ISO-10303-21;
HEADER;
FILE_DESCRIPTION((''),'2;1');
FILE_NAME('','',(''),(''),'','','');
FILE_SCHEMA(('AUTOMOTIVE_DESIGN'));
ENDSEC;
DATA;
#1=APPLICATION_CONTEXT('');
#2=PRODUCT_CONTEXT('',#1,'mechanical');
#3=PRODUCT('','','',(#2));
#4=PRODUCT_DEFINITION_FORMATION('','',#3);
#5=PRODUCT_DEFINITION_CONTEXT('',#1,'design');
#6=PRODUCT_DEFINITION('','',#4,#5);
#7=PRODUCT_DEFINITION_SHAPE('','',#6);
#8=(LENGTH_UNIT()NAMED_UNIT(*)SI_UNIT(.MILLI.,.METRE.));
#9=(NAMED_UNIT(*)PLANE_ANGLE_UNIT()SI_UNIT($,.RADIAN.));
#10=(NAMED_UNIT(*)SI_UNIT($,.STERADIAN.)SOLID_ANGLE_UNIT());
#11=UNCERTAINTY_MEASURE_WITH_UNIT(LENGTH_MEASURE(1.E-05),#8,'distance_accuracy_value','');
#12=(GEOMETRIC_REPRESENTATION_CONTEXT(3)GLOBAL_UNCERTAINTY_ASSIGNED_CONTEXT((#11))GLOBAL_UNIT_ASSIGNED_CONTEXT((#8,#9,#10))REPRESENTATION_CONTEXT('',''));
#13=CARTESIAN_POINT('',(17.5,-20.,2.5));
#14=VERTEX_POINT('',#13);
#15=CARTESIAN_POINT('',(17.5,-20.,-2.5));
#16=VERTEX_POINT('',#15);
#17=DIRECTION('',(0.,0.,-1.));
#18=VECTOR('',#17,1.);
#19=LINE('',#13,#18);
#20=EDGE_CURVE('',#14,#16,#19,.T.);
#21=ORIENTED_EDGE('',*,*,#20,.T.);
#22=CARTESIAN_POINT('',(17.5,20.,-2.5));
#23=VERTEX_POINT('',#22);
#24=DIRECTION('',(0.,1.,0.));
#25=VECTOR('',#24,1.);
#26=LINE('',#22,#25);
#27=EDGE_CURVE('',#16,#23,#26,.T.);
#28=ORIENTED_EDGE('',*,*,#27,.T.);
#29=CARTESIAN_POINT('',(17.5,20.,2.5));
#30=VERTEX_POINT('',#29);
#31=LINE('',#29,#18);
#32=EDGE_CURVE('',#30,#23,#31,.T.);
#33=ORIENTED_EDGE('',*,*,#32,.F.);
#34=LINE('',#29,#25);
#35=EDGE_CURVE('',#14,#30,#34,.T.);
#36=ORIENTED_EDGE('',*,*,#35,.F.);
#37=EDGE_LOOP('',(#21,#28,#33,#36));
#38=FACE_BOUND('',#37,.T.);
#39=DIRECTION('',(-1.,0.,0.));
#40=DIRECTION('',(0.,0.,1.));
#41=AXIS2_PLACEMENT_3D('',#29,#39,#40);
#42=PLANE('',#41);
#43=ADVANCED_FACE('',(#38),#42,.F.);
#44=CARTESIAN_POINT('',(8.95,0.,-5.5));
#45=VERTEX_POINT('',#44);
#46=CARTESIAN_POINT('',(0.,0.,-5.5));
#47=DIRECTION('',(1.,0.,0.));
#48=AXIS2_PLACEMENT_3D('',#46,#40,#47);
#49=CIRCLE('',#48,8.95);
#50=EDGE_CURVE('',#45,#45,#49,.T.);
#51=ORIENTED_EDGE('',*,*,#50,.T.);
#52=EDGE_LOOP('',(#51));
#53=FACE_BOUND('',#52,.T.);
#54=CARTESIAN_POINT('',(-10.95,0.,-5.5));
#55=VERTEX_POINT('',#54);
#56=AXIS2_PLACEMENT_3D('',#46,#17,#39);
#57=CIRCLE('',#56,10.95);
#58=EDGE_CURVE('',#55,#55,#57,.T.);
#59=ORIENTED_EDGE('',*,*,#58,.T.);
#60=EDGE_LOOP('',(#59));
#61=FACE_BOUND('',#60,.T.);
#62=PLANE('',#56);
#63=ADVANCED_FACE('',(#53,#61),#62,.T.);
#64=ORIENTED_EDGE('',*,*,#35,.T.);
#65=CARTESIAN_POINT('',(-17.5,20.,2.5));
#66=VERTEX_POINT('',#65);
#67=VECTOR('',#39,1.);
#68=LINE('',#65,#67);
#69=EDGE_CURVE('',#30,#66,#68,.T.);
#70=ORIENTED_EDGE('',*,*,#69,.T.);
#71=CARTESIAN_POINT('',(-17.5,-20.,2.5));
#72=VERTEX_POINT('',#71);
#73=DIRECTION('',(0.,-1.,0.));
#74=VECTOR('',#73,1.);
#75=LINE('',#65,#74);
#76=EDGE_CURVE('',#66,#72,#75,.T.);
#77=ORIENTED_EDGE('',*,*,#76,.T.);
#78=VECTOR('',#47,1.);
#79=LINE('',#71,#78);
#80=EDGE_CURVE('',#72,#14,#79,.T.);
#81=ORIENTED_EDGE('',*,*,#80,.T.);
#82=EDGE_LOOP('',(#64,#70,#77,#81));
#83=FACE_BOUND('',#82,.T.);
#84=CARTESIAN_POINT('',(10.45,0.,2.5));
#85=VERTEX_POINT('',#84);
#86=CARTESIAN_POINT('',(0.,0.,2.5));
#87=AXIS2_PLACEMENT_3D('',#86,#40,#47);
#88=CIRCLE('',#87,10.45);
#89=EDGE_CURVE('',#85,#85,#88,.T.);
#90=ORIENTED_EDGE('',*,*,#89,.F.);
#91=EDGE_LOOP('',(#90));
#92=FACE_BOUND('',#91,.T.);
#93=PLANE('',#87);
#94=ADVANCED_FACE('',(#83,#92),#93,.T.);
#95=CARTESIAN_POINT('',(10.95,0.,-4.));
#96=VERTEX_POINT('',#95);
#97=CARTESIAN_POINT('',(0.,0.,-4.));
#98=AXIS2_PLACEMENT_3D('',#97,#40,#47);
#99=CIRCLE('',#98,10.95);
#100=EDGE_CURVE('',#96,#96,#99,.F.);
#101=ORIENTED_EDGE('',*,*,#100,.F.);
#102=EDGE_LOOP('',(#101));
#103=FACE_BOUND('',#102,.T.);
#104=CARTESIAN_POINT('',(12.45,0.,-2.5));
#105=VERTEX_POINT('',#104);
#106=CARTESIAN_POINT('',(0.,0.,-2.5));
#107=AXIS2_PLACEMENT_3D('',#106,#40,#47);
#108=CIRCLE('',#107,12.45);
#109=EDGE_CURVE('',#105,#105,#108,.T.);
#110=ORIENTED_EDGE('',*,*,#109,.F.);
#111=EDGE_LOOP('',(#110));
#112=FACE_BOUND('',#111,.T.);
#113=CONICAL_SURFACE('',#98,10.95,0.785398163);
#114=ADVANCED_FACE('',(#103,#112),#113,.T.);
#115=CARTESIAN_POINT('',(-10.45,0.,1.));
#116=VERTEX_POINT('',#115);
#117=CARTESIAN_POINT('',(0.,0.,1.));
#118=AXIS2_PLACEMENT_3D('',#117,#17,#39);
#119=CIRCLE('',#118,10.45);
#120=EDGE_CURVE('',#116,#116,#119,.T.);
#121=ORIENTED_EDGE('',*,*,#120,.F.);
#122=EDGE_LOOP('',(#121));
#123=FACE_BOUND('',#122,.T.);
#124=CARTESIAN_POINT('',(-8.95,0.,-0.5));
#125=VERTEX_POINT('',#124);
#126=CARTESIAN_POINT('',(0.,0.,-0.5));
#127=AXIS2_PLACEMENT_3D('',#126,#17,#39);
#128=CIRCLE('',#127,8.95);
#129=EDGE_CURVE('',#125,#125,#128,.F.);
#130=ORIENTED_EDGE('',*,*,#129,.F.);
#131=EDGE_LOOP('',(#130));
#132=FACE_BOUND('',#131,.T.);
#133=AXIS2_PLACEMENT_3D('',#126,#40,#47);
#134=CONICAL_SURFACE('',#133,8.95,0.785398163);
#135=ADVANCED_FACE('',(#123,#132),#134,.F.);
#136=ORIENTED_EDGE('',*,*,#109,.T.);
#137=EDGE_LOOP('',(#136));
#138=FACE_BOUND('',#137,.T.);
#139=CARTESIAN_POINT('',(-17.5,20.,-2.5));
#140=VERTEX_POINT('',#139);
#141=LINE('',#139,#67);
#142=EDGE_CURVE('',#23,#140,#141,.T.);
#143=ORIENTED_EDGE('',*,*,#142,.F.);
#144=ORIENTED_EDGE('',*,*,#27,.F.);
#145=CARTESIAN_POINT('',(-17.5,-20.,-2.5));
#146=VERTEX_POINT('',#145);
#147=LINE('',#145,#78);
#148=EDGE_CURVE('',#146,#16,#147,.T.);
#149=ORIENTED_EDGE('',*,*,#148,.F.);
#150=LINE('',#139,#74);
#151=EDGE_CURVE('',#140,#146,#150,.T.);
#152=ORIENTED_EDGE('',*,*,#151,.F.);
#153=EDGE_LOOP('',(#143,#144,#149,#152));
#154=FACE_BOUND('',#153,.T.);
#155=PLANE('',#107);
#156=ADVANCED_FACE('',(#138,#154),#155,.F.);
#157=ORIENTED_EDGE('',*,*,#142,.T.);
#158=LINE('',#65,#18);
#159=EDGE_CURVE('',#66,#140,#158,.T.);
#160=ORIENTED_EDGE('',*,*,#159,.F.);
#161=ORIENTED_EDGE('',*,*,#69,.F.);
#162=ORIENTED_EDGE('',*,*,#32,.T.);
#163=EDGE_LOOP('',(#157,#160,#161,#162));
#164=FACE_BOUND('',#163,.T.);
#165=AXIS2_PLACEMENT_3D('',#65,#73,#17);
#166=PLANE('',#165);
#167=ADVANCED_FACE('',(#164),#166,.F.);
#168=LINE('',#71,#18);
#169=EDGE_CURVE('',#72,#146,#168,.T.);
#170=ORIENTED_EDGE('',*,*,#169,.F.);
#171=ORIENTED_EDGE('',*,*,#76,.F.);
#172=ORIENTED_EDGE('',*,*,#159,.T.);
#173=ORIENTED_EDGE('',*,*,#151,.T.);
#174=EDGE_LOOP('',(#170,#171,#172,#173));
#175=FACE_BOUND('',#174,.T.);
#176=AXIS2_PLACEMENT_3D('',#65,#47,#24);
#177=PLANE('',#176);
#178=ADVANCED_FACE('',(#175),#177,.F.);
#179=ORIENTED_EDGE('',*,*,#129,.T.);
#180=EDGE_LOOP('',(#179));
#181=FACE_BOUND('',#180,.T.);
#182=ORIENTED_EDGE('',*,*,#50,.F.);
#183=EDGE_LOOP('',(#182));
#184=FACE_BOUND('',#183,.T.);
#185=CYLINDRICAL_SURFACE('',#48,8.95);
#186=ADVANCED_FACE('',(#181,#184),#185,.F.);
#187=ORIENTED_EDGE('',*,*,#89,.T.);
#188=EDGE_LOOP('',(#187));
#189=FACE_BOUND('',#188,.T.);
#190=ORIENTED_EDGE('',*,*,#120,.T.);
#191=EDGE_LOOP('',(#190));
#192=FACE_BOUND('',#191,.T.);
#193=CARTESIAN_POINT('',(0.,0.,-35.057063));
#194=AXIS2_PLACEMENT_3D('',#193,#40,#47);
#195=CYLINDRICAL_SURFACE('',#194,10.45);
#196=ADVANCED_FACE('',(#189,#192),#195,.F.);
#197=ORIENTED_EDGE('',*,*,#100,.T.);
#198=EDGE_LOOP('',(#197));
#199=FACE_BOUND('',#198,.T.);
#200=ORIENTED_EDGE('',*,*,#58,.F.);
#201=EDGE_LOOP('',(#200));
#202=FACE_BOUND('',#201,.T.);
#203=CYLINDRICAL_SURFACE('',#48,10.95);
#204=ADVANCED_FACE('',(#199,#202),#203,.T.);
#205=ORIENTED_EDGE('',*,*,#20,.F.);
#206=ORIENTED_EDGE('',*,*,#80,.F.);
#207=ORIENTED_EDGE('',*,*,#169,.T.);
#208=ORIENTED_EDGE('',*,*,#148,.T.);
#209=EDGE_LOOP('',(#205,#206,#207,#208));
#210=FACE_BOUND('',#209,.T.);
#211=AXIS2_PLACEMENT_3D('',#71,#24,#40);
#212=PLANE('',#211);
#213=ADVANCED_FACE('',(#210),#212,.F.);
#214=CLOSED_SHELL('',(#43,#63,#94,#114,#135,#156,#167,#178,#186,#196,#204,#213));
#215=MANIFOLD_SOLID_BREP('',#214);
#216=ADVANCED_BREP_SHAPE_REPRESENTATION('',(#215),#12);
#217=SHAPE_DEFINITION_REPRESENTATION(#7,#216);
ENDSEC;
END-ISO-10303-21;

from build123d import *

# Parameters (mm, degrees)
SKETCH1_W           = 35
SKETCH1_H           = 40
BOSS_EXTRUDE1_DEPTH = 2.5
SKETCH5_R           = 10.95
BOSS_EXTRUDE2_DEPTH = 3
SKETCH2_R           = 8.95
CUT_EXTRUDE1_DEPTH  = 28.753378173
SKETCH6_R           = 10.45
CUT_EXTRUDE2_DEPTH  = 3
CHAMFER2_SIZE       = 1.5


with BuildPart() as part:
    # Sketch1 → Boss-Extrude1 (new, symmetric)
    with BuildSketch(Plane.XY):
        Rectangle(SKETCH1_W, SKETCH1_H)
    extrude(amount=BOSS_EXTRUDE1_DEPTH, both=True)

    # Sketch5 → Boss-Extrude2 (add)
    with BuildSketch(Plane(origin=(0, 0, -2.5), x_dir=(-1, 0, 0), z_dir=(0, 0, -1))):
        Circle(SKETCH5_R)
    extrude(amount=BOSS_EXTRUDE2_DEPTH)

    # Sketch2 → Cut-Extrude1 (cut, through all)
    with BuildSketch(Plane.XY.offset(2.5)):
        Circle(SKETCH2_R)
    extrude(amount=-CUT_EXTRUDE1_DEPTH, mode=Mode.SUBTRACT)

    # Sketch6 → Cut-Extrude2 (cut)
    with BuildSketch(Plane.XY.offset(2.5)):
        Circle(SKETCH6_R)
    extrude(amount=-CUT_EXTRUDE2_DEPTH, mode=Mode.SUBTRACT)

    # Chamfer2
    chamfer2_edges = [part.edges().sort_by_distance(p)[0] for p in [
        (10.95, 0, -2.5),
        (-10.45, 0, -0.5),
    ]]
    chamfer(chamfer2_edges, length=CHAMFER2_SIZE - 0.0001)  # a hair under: the kernel refuses the full size


solid = part.part
